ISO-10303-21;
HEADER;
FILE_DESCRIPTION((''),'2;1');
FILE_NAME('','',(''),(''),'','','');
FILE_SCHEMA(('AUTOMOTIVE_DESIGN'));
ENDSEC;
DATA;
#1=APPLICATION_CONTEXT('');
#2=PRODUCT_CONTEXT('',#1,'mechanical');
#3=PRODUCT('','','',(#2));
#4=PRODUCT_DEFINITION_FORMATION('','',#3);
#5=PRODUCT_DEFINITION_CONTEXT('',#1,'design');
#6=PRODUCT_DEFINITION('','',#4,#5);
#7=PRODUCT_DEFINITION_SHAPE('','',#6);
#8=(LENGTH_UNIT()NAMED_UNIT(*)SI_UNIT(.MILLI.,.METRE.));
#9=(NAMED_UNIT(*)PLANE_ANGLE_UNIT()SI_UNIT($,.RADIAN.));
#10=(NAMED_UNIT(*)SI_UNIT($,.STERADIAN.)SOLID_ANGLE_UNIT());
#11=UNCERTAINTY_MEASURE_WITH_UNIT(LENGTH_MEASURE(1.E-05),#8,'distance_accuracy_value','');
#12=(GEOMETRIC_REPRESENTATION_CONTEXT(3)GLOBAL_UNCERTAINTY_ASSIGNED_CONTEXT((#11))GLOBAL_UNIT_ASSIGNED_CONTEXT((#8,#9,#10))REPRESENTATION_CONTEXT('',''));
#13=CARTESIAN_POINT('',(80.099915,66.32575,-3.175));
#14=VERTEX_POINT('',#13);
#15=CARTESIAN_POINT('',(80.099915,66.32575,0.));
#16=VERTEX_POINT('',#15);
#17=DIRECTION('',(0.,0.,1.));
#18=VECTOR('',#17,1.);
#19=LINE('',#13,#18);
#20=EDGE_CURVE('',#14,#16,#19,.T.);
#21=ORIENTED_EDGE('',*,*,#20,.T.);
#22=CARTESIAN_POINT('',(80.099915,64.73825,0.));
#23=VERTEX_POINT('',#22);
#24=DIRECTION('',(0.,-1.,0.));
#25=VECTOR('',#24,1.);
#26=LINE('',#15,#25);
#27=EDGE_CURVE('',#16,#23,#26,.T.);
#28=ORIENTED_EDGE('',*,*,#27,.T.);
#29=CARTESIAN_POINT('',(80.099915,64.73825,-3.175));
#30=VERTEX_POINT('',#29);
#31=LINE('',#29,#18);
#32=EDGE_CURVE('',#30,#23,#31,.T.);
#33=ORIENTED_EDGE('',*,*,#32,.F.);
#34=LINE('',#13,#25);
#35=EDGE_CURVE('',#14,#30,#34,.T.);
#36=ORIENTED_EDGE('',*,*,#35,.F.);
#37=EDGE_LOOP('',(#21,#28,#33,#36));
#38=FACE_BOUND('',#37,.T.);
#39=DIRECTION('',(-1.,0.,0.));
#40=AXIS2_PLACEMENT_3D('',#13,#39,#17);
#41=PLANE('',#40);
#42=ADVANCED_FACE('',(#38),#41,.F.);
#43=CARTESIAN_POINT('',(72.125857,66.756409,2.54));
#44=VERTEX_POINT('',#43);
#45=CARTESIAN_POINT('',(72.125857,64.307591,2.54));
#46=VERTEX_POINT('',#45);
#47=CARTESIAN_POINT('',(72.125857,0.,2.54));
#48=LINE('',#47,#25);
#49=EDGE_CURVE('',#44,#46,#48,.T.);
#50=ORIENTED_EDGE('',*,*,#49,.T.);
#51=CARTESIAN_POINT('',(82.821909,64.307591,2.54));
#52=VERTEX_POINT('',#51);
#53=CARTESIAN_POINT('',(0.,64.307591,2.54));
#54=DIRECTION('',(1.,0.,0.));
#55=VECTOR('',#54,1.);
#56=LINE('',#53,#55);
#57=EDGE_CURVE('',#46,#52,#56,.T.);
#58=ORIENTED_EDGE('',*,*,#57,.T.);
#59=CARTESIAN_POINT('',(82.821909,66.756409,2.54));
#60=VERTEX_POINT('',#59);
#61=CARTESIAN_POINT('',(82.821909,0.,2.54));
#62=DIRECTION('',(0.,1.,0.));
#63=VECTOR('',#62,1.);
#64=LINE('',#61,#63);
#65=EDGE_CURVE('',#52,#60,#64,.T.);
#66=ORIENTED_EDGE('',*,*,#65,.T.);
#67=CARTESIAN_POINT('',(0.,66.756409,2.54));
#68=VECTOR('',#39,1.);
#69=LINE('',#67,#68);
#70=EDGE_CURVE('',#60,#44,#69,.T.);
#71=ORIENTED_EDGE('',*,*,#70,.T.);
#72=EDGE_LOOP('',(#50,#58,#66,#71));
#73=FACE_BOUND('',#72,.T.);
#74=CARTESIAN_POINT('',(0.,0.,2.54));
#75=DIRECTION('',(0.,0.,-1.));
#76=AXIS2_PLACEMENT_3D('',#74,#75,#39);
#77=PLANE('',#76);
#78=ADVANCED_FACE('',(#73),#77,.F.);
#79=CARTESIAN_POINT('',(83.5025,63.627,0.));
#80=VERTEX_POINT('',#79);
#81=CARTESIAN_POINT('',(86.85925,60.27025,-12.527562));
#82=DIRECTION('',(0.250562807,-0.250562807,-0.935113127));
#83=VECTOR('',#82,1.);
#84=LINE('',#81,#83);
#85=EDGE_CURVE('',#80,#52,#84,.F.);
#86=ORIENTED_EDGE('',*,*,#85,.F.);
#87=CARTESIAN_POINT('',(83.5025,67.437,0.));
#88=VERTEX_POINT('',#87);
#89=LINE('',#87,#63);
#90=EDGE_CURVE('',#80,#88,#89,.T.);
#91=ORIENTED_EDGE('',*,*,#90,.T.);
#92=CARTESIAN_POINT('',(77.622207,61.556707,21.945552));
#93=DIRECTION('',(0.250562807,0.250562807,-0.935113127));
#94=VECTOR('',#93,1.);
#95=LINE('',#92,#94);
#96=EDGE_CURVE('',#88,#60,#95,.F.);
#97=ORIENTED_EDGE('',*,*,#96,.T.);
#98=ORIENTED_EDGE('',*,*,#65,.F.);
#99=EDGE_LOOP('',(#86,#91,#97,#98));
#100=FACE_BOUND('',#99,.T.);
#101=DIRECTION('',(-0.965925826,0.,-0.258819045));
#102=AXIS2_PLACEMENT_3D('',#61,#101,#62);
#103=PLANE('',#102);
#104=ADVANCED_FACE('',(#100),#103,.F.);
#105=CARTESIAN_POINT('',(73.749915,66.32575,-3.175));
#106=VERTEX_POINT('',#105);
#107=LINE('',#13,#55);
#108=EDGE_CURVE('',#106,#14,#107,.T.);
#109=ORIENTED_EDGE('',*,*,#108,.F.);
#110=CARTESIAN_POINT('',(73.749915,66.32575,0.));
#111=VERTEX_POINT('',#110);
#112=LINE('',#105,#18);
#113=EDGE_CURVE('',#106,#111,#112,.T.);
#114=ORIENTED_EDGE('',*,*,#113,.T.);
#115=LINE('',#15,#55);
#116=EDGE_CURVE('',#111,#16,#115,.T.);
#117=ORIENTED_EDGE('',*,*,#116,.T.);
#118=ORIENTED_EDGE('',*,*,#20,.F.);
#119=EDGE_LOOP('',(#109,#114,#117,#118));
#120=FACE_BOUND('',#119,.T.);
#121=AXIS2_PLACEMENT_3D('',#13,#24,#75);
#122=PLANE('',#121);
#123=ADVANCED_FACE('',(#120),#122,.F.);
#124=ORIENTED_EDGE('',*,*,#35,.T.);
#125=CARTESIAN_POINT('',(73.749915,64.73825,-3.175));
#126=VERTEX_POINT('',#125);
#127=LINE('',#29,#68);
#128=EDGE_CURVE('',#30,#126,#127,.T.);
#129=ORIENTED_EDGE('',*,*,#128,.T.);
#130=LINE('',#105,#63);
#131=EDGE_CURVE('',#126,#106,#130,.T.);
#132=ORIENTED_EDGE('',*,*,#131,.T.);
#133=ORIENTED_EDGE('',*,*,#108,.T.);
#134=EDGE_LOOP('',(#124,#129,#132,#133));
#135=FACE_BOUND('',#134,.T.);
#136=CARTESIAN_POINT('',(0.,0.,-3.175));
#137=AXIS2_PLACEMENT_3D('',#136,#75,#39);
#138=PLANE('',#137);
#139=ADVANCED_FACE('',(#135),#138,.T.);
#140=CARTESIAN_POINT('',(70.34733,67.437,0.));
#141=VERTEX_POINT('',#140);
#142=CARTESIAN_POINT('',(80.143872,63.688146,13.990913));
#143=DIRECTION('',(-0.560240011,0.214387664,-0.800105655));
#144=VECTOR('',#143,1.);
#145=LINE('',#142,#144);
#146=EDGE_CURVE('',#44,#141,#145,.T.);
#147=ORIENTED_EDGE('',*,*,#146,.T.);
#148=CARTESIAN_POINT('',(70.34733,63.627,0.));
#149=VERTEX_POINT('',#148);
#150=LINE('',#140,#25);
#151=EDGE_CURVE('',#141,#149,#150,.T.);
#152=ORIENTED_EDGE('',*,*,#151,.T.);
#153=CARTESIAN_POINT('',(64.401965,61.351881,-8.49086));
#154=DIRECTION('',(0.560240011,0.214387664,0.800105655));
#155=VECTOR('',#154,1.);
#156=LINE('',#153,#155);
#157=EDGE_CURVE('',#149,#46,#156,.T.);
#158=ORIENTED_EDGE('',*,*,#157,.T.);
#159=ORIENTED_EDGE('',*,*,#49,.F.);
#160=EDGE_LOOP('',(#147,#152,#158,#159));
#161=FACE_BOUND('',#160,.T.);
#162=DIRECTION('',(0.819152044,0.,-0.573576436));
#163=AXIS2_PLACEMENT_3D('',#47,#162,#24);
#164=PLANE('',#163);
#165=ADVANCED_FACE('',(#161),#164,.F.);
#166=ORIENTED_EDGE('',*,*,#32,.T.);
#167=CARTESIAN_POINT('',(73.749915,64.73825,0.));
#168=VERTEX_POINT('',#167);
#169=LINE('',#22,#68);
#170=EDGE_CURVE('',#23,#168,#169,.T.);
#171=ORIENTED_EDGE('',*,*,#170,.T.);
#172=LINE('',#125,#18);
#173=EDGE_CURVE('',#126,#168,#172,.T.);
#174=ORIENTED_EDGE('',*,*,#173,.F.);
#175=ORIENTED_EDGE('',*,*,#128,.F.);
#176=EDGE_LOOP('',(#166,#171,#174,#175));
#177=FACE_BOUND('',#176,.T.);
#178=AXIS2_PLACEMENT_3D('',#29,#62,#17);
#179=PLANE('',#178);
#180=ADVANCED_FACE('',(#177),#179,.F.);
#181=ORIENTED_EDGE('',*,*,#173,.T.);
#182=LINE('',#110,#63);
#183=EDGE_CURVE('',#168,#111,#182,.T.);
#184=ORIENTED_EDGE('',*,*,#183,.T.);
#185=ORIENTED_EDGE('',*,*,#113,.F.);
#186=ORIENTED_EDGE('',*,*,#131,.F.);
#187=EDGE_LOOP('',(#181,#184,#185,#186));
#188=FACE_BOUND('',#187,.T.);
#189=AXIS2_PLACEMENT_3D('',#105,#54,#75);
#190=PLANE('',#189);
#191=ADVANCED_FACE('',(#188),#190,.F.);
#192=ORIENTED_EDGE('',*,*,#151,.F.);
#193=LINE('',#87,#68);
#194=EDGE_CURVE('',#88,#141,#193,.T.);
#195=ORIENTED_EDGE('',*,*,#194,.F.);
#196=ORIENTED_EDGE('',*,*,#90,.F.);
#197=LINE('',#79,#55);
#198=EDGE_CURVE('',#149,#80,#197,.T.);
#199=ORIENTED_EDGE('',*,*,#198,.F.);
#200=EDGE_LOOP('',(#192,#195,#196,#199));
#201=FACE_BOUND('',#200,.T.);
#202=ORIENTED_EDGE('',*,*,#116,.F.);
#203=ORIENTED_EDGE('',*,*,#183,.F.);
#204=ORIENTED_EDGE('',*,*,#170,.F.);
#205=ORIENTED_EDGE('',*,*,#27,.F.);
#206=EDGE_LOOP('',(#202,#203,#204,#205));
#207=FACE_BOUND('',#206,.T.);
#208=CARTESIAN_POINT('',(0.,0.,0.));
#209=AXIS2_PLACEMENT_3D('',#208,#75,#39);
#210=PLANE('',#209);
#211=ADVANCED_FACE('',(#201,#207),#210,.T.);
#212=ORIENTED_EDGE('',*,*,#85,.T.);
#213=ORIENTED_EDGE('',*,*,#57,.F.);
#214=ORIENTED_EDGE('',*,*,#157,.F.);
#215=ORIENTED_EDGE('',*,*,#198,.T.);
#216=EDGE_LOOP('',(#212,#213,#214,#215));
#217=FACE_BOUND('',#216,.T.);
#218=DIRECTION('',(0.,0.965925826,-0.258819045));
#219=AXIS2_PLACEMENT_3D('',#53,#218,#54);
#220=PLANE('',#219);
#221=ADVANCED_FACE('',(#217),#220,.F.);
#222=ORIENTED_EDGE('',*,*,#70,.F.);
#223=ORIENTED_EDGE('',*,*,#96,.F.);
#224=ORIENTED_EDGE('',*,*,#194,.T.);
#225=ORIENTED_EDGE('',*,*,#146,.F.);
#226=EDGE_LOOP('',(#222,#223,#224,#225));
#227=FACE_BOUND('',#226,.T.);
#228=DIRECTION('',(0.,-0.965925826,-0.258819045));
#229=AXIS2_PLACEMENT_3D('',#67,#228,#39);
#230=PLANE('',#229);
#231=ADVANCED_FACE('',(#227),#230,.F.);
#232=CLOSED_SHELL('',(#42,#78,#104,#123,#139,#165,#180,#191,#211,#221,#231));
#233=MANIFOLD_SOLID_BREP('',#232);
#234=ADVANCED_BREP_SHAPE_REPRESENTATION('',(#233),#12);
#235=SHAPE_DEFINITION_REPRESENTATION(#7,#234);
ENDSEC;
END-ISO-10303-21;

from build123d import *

# Parameters (mm, degrees)
SKETCH1_W           = 13.155170484
SKETCH1_H           = 3.81
BOSS_EXTRUDE1_DEPTH = 2.54
CHAMFER1_SIZE       = 2.54
CHAMFER1_SIZE_2     = 1.778527147
CHAMFER2_SIZE       = 0.680590949
CHAMFER2_SIZE_2     = 2.54
SKETCH2_W           = 6.35
SKETCH2_H           = 1.5875
BOSS_EXTRUDE3_DEPTH = 3.175


with BuildPart() as part:
    # Sketch1 → Boss-Extrude1 (new body)
    with BuildSketch(Plane.XY):
        with Locations((76.924914758, 65.532)):
            Rectangle(SKETCH1_W, SKETCH1_H)
    extrude(amount=BOSS_EXTRUDE1_DEPTH)

    # Chamfer1
    # the kernel refuses this chamfer: 2.54, 1.778527147 mm, written as the material it takes off along each edge
    with BuildSketch(Plane(origin=(70.347329516, 73.996682665, 2.54), x_dir=(-0.02220967419845826, 0, -0.9997533347641299), z_dir=(0, -1, 0))) as chamfer1_piece_1:
        Polygon((CHAMFER1_SIZE * 0.999753334764, CHAMFER1_SIZE * 0.0222096741985), (-CHAMFER1_SIZE_2 * 0.0222096741991, CHAMFER1_SIZE_2 * 0.999753334794), (0, 0), align=None)
    extrude(amount=16.92936533, mode=Mode.SUBTRACT)

    # Chamfer2
    # the kernel refuses this chamfer: 2.54, 0.680590949 mm, written as the material it takes off along each edge
    with BuildSketch(Plane(origin=(65.530183875, 63.627, 2.54), x_dir=(0, 0.9905000388259545, 0.13751244702128823), z_dir=(1, 0, 0))) as chamfer2_piece_1:
        Polygon((CHAMFER2_SIZE * 0.990500038499, -CHAMFER2_SIZE * 0.137512446976), (-CHAMFER2_SIZE_2 * 0.137512447021, -CHAMFER2_SIZE_2 * 0.990500038826), (0, 0), align=None)
    extrude(amount=24.567988913, mode=Mode.SUBTRACT)
    with BuildSketch(Plane(origin=(83.5025, 57.031327212, 2.54), x_dir=(-0.9905000388259543, 0, 0.13751244702128956), z_dir=(0, 1, 0))) as chamfer2_piece_2:
        Polygon((CHAMFER2_SIZE * 0.990500038499, -CHAMFER2_SIZE * 0.137512446976), (-CHAMFER2_SIZE_2 * 0.137512447021, -CHAMFER2_SIZE_2 * 0.990500038826), (0, 0), align=None)
    extrude(amount=17.001345577, mode=Mode.SUBTRACT)
    with BuildSketch(Plane(origin=(90.098172788, 67.437, 2.54), x_dir=(0, 0.009967146577158238, -0.9999503267608394), z_dir=(-1, 0, 0))) as chamfer2_piece_3:
        Polygon((CHAMFER2_SIZE_2 * 0.999950326761, CHAMFER2_SIZE_2 * 0.00996714657716), (-CHAMFER2_SIZE * 0.00996714657386, CHAMFER2_SIZE * 0.99995032643), (0, 0), align=None)
    extrude(amount=24.567988913, mode=Mode.SUBTRACT)

    # Sketch2 → Boss-Extrude3 (add)
    with BuildSketch(Plane(origin=(0, 0, 0), x_dir=(-1, 0, 0), z_dir=(0, 0, -1))):
        with Locations((-76.924914758, 65.532)):
            Rectangle(SKETCH2_W, SKETCH2_H)
    extrude(amount=BOSS_EXTRUDE3_DEPTH)


solid = part.part
